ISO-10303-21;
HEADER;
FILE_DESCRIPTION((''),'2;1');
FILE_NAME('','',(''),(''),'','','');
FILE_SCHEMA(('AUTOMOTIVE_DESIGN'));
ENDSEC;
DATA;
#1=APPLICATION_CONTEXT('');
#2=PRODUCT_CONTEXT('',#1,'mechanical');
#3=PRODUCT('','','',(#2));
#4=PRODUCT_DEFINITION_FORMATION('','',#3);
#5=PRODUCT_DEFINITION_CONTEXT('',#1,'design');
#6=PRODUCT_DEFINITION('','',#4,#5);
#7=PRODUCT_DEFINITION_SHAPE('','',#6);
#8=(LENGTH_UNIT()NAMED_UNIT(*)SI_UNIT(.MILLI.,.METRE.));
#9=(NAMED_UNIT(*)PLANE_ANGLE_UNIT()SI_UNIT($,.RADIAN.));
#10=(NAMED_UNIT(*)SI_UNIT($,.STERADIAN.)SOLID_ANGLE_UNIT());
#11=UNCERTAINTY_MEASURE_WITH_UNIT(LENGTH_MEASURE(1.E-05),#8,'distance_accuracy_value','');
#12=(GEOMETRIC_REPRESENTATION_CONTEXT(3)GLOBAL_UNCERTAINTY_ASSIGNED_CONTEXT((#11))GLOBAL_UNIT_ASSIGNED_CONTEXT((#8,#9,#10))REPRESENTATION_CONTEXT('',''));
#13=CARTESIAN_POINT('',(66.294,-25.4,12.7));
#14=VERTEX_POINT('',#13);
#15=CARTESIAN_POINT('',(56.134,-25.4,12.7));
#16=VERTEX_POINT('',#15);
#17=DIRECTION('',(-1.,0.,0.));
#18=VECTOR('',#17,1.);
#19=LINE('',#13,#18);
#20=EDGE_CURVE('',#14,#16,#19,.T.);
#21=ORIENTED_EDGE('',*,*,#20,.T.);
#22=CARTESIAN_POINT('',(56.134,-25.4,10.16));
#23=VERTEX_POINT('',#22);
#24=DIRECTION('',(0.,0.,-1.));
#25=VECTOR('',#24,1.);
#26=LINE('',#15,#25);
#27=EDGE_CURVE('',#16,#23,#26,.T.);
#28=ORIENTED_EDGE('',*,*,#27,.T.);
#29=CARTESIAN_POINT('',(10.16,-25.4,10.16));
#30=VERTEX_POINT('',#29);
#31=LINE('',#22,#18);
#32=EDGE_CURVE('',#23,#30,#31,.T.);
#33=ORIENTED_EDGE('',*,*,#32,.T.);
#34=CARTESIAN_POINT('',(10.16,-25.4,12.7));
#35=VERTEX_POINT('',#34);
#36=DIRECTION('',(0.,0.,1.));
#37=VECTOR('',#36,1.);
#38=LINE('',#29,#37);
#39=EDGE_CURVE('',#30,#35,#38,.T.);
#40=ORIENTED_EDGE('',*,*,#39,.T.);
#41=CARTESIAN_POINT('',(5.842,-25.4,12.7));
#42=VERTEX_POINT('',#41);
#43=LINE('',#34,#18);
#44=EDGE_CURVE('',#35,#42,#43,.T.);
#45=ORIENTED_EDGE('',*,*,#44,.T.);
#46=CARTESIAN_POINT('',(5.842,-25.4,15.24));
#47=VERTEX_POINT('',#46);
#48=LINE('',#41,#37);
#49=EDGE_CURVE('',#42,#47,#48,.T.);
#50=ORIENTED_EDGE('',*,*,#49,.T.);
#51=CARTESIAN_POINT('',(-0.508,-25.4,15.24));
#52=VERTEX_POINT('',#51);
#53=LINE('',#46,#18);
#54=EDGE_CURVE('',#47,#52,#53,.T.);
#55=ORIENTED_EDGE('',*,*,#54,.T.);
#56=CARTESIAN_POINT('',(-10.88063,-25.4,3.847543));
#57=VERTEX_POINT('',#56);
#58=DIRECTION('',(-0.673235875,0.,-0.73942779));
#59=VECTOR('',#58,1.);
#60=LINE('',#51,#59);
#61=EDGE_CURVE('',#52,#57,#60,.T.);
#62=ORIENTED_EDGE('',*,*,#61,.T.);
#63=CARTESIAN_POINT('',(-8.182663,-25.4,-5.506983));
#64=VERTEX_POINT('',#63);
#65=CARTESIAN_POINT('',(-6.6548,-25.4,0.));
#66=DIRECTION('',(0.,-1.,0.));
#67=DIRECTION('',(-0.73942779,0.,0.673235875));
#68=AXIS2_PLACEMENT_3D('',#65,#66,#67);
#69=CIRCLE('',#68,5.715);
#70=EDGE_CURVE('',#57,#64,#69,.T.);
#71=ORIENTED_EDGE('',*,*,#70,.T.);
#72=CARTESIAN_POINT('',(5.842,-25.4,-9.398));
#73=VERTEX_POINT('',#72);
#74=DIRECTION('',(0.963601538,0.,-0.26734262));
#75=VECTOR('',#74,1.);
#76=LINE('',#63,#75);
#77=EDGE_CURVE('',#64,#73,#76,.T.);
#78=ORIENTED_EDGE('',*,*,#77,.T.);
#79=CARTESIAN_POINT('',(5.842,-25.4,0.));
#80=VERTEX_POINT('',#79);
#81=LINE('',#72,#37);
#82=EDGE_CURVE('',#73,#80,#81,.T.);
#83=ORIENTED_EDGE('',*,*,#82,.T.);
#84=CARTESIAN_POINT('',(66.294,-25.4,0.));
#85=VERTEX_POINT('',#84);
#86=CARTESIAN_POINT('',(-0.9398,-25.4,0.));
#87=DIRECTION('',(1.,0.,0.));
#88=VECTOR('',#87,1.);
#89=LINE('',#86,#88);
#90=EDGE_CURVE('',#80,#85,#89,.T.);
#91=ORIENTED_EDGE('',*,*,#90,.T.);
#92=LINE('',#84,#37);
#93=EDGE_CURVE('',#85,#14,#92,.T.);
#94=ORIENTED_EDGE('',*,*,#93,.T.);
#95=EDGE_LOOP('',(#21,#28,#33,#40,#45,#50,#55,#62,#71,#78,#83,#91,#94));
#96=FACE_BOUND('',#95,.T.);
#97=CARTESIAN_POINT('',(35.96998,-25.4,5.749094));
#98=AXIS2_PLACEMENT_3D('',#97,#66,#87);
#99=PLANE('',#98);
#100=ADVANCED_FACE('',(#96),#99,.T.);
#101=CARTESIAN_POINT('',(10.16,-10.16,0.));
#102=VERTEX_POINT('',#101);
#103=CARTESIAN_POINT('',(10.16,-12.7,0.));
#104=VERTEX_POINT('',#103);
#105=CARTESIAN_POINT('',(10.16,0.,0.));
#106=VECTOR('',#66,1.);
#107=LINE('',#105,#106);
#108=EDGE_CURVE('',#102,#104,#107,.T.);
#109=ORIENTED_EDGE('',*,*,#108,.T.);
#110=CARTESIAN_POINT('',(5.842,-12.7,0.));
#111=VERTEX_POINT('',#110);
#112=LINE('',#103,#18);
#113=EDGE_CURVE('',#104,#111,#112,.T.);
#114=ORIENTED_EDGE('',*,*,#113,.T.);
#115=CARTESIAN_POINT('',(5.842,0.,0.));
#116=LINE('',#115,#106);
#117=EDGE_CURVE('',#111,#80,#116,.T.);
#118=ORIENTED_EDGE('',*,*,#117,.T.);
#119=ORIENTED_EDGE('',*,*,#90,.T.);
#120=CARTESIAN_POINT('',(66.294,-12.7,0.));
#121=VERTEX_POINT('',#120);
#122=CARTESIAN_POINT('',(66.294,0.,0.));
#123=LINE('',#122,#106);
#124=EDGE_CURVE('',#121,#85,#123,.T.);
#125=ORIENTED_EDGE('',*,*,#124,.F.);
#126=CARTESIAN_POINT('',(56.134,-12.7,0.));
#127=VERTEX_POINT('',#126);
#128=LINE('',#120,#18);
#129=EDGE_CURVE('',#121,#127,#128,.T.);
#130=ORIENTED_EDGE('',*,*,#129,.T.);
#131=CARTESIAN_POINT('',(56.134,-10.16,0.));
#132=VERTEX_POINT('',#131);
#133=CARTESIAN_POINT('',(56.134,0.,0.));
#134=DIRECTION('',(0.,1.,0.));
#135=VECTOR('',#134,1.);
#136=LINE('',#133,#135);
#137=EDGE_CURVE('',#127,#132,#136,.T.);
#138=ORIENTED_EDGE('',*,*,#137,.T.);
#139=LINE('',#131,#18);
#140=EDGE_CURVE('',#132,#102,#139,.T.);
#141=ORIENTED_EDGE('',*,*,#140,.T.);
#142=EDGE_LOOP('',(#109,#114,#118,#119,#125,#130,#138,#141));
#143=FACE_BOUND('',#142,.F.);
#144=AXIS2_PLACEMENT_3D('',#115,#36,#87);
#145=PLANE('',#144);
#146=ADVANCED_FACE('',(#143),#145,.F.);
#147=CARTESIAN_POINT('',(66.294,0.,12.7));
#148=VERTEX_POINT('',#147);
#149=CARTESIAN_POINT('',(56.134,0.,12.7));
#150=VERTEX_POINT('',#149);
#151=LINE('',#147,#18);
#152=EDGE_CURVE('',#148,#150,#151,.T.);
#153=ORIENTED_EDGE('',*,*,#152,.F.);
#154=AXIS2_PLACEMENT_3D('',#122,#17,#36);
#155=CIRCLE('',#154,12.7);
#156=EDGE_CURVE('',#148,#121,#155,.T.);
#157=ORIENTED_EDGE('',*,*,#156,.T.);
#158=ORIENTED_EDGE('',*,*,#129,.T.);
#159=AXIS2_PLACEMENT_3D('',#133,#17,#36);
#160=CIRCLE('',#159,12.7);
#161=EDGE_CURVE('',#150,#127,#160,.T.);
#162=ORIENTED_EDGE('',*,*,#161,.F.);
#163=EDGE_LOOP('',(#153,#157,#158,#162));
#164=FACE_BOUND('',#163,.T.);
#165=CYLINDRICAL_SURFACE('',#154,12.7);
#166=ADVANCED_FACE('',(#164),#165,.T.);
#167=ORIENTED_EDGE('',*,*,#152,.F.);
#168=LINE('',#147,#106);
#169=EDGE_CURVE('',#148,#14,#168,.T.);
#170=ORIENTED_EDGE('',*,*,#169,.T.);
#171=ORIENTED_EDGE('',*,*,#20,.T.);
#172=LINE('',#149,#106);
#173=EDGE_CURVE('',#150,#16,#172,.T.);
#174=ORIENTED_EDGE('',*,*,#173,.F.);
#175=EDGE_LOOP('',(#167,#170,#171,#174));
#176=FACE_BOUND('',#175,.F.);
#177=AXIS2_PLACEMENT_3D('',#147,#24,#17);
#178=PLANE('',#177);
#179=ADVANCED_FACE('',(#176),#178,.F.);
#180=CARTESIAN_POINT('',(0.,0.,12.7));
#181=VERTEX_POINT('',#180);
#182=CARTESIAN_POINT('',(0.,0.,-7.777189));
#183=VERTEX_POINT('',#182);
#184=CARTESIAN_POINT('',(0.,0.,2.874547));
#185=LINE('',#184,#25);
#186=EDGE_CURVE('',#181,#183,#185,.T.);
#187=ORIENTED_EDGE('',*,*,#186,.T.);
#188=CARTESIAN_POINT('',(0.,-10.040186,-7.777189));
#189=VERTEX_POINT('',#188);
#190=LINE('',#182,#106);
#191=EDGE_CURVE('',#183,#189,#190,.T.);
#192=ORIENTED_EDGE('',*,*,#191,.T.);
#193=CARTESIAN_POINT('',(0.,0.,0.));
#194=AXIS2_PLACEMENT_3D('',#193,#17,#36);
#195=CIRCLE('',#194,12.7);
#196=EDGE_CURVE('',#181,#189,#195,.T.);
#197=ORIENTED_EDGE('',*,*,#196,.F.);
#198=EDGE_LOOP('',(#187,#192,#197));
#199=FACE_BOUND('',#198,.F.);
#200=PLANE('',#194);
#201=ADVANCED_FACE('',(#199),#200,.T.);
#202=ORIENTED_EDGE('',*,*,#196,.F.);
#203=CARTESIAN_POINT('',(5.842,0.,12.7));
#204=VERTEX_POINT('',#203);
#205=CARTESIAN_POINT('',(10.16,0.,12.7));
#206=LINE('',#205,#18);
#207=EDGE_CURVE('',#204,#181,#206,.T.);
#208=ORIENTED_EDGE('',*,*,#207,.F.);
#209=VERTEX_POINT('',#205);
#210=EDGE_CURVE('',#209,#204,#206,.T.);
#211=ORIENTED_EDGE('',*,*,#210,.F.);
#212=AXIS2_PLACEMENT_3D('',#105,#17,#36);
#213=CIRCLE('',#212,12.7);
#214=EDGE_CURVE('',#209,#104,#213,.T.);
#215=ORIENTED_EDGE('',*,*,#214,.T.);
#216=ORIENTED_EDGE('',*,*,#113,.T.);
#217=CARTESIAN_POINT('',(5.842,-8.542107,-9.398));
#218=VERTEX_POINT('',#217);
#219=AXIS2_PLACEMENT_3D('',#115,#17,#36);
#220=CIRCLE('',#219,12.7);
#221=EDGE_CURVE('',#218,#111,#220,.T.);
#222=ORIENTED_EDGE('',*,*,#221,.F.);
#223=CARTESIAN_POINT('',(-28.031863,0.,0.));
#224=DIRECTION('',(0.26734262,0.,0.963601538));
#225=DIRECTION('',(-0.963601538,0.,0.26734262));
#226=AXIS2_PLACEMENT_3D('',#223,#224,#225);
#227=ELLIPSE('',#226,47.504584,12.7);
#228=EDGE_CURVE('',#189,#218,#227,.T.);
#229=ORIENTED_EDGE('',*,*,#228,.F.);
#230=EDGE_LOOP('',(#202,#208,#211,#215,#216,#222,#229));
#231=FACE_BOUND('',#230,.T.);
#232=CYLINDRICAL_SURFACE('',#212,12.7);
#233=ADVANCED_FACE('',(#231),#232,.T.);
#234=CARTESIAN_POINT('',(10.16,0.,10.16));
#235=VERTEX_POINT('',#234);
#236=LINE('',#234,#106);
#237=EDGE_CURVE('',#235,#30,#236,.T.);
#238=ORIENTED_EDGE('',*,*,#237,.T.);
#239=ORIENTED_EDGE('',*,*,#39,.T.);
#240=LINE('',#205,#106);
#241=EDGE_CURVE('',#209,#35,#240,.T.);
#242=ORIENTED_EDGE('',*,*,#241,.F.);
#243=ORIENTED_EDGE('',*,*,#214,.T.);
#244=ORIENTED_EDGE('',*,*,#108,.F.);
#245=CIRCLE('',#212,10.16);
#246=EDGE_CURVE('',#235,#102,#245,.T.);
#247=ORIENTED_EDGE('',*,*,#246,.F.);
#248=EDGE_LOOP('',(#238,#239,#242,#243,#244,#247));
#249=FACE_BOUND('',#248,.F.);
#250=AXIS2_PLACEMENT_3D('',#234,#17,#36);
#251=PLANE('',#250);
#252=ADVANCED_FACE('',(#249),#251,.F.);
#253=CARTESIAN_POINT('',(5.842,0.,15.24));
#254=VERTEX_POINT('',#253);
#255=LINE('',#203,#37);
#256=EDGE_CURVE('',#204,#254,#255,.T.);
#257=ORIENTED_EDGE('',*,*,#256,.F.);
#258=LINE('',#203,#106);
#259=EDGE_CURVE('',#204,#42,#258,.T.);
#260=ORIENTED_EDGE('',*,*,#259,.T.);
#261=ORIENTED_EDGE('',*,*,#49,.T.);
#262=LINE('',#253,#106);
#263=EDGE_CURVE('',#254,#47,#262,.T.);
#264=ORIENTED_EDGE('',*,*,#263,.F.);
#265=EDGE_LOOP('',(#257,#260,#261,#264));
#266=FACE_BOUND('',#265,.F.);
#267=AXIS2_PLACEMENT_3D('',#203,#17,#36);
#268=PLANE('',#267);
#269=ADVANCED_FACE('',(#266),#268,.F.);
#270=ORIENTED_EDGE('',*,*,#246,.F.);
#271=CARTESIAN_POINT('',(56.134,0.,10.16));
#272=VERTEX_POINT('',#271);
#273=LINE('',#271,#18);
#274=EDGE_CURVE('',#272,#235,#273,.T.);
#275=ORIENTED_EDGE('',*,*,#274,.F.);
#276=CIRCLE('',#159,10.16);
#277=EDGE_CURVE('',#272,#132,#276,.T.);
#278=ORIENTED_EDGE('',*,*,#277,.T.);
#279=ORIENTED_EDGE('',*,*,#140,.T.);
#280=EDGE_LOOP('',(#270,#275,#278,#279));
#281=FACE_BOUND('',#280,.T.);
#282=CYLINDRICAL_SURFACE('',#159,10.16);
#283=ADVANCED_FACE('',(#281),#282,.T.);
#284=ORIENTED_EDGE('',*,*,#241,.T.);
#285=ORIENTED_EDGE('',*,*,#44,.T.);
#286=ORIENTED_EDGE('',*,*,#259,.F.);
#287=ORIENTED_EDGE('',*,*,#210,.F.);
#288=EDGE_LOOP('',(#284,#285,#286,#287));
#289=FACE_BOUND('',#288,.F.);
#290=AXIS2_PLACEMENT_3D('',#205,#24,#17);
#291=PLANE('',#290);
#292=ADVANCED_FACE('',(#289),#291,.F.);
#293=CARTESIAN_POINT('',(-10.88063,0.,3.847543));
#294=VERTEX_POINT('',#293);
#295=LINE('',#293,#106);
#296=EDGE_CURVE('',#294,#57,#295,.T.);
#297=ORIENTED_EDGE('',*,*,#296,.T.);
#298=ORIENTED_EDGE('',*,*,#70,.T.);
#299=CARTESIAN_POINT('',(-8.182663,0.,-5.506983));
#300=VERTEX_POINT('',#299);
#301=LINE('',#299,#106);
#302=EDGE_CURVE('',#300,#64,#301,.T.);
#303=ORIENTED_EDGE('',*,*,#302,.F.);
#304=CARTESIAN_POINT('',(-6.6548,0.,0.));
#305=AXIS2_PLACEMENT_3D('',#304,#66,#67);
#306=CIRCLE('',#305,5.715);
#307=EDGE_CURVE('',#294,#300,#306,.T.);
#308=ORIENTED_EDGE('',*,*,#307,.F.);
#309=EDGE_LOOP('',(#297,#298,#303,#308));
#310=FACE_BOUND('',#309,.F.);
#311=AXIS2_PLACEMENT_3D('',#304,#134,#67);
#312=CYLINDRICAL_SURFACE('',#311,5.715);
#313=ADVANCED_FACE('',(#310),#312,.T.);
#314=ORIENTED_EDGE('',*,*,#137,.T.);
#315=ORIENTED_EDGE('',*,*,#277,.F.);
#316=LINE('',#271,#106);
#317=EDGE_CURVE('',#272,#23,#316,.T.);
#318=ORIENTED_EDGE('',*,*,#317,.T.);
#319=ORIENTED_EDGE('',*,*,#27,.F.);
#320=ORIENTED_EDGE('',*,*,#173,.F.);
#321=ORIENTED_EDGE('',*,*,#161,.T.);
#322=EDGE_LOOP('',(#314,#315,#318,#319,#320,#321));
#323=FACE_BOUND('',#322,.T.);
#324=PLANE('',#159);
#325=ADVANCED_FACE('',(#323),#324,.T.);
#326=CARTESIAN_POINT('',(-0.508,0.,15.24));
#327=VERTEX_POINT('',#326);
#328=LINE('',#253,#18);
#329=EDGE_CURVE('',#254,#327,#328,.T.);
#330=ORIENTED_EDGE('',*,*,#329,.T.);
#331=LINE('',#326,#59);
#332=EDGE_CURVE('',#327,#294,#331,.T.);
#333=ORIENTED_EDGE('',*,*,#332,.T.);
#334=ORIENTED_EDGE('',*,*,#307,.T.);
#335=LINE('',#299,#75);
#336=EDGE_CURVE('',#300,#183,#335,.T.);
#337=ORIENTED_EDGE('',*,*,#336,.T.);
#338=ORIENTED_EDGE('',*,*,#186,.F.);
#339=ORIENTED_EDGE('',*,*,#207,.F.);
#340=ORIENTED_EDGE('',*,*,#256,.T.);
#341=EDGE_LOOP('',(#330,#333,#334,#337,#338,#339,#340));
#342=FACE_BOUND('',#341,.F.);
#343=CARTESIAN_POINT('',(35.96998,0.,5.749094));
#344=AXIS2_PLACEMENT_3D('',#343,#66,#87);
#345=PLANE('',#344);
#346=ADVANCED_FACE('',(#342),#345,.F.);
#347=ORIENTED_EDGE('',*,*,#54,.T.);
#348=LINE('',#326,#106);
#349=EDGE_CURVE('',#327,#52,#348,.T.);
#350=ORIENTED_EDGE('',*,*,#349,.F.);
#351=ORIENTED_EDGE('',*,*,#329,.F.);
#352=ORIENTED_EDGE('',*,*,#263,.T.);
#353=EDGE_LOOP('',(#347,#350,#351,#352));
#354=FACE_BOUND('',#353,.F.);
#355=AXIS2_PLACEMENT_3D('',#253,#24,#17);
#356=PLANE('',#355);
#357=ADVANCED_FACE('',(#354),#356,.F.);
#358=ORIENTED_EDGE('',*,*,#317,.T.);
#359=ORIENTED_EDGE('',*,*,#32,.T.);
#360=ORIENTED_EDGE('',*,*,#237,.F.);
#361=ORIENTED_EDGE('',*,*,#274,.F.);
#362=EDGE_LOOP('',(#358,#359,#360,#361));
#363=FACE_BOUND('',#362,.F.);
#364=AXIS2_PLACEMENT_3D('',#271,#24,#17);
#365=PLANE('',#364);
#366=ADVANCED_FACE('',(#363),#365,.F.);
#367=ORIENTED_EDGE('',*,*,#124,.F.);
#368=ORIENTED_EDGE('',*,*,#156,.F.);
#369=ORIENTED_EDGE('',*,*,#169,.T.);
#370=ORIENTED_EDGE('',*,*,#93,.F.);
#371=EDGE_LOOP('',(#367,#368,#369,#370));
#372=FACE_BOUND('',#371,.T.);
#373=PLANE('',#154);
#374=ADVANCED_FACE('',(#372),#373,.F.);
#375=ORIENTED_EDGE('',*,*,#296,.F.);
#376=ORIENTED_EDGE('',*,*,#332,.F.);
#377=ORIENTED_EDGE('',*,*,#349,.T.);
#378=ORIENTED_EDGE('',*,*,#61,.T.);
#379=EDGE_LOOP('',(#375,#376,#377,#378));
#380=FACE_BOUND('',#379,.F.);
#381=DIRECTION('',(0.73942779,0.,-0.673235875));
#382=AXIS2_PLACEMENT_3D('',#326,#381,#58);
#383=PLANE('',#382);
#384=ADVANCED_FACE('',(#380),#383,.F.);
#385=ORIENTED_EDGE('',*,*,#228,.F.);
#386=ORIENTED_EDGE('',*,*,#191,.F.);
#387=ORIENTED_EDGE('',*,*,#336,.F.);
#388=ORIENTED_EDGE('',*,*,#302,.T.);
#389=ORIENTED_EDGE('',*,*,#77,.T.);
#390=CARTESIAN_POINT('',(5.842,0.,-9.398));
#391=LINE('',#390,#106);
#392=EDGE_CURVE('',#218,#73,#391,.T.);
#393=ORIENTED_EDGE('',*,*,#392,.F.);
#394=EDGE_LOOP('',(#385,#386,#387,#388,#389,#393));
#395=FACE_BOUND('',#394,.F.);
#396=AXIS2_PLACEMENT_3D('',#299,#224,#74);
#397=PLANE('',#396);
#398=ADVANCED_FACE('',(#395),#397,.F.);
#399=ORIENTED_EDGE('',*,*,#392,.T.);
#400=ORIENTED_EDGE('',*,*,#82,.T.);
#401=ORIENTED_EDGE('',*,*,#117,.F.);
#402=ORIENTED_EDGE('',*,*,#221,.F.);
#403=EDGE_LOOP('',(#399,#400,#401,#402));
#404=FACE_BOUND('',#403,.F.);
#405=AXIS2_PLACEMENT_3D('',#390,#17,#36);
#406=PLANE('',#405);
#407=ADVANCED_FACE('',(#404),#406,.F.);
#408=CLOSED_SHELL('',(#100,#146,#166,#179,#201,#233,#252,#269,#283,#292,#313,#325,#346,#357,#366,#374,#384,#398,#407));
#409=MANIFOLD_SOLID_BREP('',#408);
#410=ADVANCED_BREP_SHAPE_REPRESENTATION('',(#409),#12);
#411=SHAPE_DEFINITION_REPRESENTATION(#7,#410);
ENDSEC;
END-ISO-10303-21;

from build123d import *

# Parameters (mm, degrees)
F0_W     = 5.842
F0_H     = 12.7
F0_R     = 3.175
F2_DEPTH = 25.4


with BuildPart() as f1:
    # F0 (on Front) → F1 (revolve)
    with BuildSketch(Plane.XZ):
        Polygon((5.842, 12.7), (5.842, 0), (66.294, 0), (66.294, 12.7), (56.134, 12.7), (56.134, 10.16), (10.16, 10.16), (10.16, 12.7), align=None)
        with Locations((2.921, 6.35)):
            Rectangle(F0_W, F0_H)
    revolve(axis=Axis((33.147, 0, 0), (-1, 0, 0)))

    # F0 (on Front) → F2 (join)
    with BuildSketch(Plane.XZ):
        Polygon((5.842, 12.7), (5.842, 0), (66.294, 0), (66.294, 12.7), (56.134, 12.7), (56.134, 10.16), (10.16, 10.16), (10.16, 12.7), align=None)
        with BuildLine():
            ThreePointArc((-8.1826630726, -5.5069827884), (-3.1957909266, -4.5493385486), (-0.9398, 0))
            ThreePointArc((-0.9398, 0), (-4.5919612295, 5.3297205562), (-10.8806298187, 3.8475430269))
            ThreePointArc((-10.8806298187, 3.8475430269), (-12.1459778134, -1.5837270034), (-8.1826630726, -5.5069827884))
        make_face()
        with Locations((-6.6548, 0)):
            Circle(F0_R, mode=Mode.SUBTRACT)
        with BuildLine():
            Line((-0.9398, 0), (0, 0))
            Line((0, 0), (0, 12.7))
            Line((0, 12.7), (5.842, 12.7))
            Line((5.842, 12.7), (5.842, 15.24))
            Line((5.842, 15.24), (-0.508, 15.24))
            Line((-0.508, 15.24), (-10.8806298187, 3.8475430269))
            ThreePointArc((-10.8806298187, 3.8475430269), (-4.5919612295, 5.3297205562), (-0.9398, 0))
        make_face()
        with Locations((2.921, 6.35)):
            Rectangle(F0_W, F0_H)
        with BuildLine():
            Line((5.842, 0), (0, 0))
            Line((0, 0), (-0.9398, 0))
            ThreePointArc((-0.9398, 0), (-3.1957909266, -4.5493385486), (-8.1826630726, -5.5069827884))
            Line((-8.1826630726, -5.5069827884), (5.842, -9.398))
            Line((5.842, -9.398), (5.842, 0))
        make_face()
        with Locations((-6.6548, 0)):
            Circle(F0_R)
    extrude(amount=F2_DEPTH)


solid = f1.part
